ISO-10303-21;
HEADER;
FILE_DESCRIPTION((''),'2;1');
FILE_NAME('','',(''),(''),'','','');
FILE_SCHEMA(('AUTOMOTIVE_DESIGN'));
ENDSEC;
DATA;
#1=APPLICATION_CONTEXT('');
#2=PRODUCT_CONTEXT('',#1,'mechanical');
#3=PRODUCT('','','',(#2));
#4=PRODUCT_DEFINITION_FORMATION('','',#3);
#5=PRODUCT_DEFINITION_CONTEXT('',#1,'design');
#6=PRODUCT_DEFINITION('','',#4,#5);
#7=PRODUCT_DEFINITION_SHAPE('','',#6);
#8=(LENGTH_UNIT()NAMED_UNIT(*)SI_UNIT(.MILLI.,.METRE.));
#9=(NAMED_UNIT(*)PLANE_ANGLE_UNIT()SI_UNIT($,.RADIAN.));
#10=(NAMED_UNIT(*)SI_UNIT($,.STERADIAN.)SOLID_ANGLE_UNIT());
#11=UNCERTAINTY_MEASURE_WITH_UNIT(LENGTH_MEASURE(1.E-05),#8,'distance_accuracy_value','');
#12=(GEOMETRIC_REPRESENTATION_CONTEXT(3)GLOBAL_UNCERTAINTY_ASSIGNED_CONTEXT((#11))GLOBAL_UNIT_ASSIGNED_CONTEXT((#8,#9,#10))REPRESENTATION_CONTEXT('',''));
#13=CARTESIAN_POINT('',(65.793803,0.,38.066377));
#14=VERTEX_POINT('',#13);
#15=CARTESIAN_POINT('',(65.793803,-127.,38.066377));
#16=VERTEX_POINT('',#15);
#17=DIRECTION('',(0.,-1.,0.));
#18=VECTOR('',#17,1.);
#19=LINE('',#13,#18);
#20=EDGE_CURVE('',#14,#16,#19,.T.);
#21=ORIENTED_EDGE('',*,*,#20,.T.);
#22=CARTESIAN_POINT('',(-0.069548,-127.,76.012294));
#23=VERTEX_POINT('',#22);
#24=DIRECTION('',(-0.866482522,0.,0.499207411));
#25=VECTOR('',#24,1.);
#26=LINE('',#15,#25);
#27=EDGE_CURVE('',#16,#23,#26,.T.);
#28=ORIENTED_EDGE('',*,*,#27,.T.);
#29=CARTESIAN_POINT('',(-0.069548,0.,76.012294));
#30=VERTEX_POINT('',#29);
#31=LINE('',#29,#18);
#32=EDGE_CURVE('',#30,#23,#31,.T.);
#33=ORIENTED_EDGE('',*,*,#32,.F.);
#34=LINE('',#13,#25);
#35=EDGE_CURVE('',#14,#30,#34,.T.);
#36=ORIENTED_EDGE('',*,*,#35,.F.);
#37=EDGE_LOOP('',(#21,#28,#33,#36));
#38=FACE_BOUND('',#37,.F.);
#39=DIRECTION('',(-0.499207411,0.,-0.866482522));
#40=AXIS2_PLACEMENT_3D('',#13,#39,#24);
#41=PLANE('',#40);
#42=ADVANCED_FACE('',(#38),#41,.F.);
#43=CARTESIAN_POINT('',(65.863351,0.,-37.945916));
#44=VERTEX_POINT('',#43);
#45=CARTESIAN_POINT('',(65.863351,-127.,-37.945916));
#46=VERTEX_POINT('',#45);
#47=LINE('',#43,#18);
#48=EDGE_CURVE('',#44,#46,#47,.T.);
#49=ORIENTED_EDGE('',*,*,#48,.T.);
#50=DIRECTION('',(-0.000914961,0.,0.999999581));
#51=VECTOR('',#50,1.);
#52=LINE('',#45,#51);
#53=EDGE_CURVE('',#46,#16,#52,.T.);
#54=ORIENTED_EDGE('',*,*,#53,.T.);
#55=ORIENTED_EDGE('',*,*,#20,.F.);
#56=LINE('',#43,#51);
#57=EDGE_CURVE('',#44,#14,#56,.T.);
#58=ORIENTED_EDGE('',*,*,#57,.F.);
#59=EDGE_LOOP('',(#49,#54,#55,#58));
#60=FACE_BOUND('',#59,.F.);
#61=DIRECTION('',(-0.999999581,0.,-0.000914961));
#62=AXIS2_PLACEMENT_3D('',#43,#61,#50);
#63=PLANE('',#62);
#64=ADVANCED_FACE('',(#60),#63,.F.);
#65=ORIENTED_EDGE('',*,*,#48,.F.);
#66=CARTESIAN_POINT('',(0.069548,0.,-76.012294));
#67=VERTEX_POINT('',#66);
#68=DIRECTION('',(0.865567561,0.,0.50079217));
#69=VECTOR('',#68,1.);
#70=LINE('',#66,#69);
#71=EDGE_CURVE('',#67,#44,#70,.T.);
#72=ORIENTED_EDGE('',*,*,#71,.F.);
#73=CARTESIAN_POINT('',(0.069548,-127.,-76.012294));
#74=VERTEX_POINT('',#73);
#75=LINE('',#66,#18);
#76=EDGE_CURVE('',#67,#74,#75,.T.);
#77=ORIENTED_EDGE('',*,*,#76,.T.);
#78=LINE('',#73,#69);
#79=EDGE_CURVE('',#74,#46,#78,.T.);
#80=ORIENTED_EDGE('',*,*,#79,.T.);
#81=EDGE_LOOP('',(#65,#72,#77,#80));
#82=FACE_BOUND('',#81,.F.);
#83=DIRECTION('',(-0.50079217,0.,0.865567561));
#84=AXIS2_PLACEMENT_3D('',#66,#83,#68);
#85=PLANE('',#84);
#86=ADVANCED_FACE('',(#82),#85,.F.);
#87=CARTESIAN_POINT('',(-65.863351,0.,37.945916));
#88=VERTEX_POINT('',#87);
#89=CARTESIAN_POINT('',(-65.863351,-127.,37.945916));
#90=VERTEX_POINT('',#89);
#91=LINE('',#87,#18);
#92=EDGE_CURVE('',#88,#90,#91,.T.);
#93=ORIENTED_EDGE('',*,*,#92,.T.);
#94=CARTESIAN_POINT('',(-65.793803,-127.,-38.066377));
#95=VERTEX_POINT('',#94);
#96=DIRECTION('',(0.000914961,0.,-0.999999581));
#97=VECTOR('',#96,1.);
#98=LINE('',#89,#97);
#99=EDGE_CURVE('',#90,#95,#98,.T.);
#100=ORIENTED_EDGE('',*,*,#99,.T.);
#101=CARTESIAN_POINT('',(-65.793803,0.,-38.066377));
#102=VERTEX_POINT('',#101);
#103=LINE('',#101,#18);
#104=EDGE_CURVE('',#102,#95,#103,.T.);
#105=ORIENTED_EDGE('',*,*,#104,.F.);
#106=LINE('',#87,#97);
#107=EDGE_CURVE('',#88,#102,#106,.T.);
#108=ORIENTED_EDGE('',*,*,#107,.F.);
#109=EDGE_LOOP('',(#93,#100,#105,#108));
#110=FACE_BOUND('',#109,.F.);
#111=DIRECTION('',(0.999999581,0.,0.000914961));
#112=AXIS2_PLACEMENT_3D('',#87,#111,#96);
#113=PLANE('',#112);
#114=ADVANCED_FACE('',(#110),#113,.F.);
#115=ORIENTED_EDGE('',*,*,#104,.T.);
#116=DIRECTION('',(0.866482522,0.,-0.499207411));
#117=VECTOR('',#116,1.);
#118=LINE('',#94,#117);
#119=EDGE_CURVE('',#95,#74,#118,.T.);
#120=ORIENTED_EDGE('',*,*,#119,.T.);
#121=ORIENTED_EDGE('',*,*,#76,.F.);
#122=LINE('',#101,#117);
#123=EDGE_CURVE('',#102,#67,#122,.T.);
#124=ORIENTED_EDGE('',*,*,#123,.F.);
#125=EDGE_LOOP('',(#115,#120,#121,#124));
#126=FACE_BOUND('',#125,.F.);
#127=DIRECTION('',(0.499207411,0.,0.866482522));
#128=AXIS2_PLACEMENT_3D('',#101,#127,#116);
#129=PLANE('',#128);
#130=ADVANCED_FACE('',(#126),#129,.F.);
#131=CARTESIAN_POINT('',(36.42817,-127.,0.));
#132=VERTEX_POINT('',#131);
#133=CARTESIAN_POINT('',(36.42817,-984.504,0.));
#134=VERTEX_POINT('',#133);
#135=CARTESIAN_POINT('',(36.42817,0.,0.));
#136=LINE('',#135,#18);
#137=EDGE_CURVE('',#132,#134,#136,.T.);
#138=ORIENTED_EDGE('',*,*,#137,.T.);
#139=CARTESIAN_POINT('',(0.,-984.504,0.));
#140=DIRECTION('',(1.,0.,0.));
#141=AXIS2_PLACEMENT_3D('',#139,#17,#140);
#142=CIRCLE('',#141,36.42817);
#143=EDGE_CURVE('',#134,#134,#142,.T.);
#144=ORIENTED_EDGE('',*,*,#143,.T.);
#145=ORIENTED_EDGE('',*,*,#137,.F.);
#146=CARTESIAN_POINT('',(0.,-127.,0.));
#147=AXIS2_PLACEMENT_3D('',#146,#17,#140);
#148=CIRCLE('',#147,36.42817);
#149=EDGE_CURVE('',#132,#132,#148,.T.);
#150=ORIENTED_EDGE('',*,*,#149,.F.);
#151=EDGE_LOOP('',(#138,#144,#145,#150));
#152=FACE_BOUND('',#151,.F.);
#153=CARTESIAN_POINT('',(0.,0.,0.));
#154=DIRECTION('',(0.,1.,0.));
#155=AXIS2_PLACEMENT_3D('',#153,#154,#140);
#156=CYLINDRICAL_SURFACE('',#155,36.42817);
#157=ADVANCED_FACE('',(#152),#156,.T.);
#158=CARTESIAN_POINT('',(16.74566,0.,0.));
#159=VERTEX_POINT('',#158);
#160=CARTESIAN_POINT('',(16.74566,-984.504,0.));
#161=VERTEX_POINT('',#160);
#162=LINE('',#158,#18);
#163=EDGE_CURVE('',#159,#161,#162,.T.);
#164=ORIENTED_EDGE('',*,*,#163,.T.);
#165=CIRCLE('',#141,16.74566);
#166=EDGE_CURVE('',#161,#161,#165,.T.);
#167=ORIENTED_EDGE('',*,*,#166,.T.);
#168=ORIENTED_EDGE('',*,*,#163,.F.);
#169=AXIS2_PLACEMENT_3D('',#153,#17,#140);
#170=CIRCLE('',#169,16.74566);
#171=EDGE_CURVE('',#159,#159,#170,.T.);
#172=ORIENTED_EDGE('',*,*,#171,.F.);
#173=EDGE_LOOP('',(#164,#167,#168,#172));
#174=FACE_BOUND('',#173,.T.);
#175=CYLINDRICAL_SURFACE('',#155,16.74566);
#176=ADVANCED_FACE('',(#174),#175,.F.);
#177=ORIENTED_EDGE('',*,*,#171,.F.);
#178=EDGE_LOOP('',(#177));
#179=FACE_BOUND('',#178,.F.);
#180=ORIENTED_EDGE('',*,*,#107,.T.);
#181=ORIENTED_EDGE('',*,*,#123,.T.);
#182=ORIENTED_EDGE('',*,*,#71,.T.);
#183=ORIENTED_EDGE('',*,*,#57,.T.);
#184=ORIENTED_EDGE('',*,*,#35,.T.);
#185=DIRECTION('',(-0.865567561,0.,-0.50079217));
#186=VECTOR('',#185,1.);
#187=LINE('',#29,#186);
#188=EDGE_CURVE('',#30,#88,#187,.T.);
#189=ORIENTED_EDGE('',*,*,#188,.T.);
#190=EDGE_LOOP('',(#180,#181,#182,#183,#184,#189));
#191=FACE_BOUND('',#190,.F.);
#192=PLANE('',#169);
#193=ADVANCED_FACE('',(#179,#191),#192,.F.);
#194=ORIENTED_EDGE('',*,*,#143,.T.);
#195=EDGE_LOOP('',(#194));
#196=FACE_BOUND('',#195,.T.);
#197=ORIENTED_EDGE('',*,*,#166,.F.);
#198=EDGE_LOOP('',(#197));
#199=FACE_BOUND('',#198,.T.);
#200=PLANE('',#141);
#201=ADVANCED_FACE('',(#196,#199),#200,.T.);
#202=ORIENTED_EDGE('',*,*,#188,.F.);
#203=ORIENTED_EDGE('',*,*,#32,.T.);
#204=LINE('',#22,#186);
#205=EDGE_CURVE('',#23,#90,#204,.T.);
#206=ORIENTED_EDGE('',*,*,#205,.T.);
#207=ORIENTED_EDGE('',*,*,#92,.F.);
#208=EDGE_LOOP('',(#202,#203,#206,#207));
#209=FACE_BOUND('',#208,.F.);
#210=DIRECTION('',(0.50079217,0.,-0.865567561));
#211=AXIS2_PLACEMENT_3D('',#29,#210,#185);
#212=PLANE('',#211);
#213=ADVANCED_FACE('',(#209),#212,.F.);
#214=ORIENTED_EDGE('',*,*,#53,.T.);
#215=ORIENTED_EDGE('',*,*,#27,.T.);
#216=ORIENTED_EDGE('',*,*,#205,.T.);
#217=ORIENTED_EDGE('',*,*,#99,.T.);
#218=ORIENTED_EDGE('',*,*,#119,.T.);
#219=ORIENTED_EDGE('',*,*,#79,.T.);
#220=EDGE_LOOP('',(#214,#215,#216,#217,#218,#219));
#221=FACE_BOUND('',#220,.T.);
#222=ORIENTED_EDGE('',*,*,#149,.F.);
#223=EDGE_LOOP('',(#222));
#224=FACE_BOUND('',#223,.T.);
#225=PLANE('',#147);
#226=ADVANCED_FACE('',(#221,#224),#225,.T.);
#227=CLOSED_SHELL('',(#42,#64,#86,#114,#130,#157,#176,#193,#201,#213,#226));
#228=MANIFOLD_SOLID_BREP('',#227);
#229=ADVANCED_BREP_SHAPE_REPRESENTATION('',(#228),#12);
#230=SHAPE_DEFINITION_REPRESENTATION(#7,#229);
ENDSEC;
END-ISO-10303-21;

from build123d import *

# Parameters (mm, degrees)
F0_R     = 36.4281701053
F0_R_2   = 16.7456603081
F1_DEPTH = 984.504
F2_DEPTH = 127


# Not quite as in the source:
# - a feature of the source that left no trace in its solid (it failed there, or was rolled back) is left out
# - the program builds the solid bodies; features that only make, move or delete a surface that nothing else refers to are left out


with BuildPart() as f1:
    # F0 (on Front) → F1 (new body)
    with BuildSketch(Plane.XZ):
        Circle(F0_R)
        Circle(F0_R_2, mode=Mode.SUBTRACT)
    extrude(amount=F1_DEPTH)

    # F0 (on Front) → F2 (join)
    with BuildSketch(Plane.XZ):
        Polygon((0.0695483181, -76.0122935755), (65.8633513954, -37.9459161775), (65.7938030773, 38.0663773981), (-0.0695483181, 76.0122935755), (-65.8633513954, 37.9459161775), (-65.7938030773, -38.0663773981), align=None)
        Circle(F0_R, mode=Mode.SUBTRACT)
    extrude(amount=F2_DEPTH)


solid = f1.part
